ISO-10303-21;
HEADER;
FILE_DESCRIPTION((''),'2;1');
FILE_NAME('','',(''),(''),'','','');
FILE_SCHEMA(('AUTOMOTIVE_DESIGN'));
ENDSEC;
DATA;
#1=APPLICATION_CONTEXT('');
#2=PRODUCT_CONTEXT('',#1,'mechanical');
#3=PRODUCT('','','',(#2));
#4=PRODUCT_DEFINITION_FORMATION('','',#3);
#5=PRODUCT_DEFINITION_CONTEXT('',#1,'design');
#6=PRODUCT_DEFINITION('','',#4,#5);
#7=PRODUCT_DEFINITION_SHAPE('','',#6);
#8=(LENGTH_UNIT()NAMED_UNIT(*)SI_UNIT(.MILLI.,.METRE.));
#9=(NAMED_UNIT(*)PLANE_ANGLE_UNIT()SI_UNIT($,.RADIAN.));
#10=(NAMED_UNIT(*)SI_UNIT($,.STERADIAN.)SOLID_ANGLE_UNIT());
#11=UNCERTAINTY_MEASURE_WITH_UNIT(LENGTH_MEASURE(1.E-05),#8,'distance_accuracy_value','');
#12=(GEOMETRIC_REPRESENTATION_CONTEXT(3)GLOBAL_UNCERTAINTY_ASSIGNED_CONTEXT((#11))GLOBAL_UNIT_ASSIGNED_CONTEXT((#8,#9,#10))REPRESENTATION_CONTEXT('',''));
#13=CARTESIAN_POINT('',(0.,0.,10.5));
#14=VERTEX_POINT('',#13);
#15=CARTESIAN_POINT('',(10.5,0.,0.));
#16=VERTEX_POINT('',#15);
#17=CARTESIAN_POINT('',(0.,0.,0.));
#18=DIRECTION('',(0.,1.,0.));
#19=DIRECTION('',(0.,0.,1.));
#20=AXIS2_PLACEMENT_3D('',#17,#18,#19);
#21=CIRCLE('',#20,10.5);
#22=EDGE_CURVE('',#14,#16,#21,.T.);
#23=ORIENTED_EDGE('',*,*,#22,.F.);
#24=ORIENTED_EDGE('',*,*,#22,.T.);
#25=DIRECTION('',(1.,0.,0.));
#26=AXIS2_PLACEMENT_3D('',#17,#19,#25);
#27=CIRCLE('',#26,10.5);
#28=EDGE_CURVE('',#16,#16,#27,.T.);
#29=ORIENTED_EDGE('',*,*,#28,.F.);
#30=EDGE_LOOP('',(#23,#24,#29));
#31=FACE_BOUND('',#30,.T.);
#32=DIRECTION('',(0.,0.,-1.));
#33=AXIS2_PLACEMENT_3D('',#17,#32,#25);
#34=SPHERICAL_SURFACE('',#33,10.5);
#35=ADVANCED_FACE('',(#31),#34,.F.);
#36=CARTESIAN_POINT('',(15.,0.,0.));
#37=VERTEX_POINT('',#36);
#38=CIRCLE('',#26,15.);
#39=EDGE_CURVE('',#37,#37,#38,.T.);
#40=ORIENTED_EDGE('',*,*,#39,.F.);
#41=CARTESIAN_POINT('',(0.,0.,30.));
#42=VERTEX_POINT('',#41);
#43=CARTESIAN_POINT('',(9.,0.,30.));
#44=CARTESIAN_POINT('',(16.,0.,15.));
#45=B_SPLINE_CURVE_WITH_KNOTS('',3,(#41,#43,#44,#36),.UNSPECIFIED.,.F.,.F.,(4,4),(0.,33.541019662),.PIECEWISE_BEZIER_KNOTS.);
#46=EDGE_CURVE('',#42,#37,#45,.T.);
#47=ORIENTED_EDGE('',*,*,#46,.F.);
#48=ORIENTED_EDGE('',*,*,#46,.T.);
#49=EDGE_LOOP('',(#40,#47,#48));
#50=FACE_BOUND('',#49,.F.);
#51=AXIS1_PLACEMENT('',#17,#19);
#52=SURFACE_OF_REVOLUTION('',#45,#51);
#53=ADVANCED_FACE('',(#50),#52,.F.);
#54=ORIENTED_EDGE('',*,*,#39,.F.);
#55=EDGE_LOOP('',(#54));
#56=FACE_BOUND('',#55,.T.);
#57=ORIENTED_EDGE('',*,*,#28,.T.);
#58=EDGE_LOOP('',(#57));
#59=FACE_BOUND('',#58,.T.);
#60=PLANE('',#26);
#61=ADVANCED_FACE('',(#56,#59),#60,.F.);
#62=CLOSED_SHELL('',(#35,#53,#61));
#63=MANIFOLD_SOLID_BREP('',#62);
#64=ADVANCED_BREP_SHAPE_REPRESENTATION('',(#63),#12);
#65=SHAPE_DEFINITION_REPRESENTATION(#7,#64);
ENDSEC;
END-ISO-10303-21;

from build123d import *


# Not quite as in the source:
# - a feature names something its author has since deleted; it is built from what else it names


with BuildPart() as f2:
    # F0 (on Front) → F2 (revolve)
    with BuildSketch(Plane.XZ):
        with BuildLine():
            ThreePointArc((0, 10.5), (7.4246212025, 7.4246212025), (10.5, 0))
            Line((10.5, 0), (15, 0))
            add(Edge.make_bspline(
                [(0, 30), (9, 30), (16, 15), (15, 0)],
                knots=[0, 0, 0, 0, 33.5410196625, 33.5410196625, 33.5410196625, 33.5410196625], degree=3))
            Line((0, 30), (0, 10.5))
        make_face()
    revolve(axis=Axis((0, 0, 0), (0, 0, 1)))


solid = f2.part
